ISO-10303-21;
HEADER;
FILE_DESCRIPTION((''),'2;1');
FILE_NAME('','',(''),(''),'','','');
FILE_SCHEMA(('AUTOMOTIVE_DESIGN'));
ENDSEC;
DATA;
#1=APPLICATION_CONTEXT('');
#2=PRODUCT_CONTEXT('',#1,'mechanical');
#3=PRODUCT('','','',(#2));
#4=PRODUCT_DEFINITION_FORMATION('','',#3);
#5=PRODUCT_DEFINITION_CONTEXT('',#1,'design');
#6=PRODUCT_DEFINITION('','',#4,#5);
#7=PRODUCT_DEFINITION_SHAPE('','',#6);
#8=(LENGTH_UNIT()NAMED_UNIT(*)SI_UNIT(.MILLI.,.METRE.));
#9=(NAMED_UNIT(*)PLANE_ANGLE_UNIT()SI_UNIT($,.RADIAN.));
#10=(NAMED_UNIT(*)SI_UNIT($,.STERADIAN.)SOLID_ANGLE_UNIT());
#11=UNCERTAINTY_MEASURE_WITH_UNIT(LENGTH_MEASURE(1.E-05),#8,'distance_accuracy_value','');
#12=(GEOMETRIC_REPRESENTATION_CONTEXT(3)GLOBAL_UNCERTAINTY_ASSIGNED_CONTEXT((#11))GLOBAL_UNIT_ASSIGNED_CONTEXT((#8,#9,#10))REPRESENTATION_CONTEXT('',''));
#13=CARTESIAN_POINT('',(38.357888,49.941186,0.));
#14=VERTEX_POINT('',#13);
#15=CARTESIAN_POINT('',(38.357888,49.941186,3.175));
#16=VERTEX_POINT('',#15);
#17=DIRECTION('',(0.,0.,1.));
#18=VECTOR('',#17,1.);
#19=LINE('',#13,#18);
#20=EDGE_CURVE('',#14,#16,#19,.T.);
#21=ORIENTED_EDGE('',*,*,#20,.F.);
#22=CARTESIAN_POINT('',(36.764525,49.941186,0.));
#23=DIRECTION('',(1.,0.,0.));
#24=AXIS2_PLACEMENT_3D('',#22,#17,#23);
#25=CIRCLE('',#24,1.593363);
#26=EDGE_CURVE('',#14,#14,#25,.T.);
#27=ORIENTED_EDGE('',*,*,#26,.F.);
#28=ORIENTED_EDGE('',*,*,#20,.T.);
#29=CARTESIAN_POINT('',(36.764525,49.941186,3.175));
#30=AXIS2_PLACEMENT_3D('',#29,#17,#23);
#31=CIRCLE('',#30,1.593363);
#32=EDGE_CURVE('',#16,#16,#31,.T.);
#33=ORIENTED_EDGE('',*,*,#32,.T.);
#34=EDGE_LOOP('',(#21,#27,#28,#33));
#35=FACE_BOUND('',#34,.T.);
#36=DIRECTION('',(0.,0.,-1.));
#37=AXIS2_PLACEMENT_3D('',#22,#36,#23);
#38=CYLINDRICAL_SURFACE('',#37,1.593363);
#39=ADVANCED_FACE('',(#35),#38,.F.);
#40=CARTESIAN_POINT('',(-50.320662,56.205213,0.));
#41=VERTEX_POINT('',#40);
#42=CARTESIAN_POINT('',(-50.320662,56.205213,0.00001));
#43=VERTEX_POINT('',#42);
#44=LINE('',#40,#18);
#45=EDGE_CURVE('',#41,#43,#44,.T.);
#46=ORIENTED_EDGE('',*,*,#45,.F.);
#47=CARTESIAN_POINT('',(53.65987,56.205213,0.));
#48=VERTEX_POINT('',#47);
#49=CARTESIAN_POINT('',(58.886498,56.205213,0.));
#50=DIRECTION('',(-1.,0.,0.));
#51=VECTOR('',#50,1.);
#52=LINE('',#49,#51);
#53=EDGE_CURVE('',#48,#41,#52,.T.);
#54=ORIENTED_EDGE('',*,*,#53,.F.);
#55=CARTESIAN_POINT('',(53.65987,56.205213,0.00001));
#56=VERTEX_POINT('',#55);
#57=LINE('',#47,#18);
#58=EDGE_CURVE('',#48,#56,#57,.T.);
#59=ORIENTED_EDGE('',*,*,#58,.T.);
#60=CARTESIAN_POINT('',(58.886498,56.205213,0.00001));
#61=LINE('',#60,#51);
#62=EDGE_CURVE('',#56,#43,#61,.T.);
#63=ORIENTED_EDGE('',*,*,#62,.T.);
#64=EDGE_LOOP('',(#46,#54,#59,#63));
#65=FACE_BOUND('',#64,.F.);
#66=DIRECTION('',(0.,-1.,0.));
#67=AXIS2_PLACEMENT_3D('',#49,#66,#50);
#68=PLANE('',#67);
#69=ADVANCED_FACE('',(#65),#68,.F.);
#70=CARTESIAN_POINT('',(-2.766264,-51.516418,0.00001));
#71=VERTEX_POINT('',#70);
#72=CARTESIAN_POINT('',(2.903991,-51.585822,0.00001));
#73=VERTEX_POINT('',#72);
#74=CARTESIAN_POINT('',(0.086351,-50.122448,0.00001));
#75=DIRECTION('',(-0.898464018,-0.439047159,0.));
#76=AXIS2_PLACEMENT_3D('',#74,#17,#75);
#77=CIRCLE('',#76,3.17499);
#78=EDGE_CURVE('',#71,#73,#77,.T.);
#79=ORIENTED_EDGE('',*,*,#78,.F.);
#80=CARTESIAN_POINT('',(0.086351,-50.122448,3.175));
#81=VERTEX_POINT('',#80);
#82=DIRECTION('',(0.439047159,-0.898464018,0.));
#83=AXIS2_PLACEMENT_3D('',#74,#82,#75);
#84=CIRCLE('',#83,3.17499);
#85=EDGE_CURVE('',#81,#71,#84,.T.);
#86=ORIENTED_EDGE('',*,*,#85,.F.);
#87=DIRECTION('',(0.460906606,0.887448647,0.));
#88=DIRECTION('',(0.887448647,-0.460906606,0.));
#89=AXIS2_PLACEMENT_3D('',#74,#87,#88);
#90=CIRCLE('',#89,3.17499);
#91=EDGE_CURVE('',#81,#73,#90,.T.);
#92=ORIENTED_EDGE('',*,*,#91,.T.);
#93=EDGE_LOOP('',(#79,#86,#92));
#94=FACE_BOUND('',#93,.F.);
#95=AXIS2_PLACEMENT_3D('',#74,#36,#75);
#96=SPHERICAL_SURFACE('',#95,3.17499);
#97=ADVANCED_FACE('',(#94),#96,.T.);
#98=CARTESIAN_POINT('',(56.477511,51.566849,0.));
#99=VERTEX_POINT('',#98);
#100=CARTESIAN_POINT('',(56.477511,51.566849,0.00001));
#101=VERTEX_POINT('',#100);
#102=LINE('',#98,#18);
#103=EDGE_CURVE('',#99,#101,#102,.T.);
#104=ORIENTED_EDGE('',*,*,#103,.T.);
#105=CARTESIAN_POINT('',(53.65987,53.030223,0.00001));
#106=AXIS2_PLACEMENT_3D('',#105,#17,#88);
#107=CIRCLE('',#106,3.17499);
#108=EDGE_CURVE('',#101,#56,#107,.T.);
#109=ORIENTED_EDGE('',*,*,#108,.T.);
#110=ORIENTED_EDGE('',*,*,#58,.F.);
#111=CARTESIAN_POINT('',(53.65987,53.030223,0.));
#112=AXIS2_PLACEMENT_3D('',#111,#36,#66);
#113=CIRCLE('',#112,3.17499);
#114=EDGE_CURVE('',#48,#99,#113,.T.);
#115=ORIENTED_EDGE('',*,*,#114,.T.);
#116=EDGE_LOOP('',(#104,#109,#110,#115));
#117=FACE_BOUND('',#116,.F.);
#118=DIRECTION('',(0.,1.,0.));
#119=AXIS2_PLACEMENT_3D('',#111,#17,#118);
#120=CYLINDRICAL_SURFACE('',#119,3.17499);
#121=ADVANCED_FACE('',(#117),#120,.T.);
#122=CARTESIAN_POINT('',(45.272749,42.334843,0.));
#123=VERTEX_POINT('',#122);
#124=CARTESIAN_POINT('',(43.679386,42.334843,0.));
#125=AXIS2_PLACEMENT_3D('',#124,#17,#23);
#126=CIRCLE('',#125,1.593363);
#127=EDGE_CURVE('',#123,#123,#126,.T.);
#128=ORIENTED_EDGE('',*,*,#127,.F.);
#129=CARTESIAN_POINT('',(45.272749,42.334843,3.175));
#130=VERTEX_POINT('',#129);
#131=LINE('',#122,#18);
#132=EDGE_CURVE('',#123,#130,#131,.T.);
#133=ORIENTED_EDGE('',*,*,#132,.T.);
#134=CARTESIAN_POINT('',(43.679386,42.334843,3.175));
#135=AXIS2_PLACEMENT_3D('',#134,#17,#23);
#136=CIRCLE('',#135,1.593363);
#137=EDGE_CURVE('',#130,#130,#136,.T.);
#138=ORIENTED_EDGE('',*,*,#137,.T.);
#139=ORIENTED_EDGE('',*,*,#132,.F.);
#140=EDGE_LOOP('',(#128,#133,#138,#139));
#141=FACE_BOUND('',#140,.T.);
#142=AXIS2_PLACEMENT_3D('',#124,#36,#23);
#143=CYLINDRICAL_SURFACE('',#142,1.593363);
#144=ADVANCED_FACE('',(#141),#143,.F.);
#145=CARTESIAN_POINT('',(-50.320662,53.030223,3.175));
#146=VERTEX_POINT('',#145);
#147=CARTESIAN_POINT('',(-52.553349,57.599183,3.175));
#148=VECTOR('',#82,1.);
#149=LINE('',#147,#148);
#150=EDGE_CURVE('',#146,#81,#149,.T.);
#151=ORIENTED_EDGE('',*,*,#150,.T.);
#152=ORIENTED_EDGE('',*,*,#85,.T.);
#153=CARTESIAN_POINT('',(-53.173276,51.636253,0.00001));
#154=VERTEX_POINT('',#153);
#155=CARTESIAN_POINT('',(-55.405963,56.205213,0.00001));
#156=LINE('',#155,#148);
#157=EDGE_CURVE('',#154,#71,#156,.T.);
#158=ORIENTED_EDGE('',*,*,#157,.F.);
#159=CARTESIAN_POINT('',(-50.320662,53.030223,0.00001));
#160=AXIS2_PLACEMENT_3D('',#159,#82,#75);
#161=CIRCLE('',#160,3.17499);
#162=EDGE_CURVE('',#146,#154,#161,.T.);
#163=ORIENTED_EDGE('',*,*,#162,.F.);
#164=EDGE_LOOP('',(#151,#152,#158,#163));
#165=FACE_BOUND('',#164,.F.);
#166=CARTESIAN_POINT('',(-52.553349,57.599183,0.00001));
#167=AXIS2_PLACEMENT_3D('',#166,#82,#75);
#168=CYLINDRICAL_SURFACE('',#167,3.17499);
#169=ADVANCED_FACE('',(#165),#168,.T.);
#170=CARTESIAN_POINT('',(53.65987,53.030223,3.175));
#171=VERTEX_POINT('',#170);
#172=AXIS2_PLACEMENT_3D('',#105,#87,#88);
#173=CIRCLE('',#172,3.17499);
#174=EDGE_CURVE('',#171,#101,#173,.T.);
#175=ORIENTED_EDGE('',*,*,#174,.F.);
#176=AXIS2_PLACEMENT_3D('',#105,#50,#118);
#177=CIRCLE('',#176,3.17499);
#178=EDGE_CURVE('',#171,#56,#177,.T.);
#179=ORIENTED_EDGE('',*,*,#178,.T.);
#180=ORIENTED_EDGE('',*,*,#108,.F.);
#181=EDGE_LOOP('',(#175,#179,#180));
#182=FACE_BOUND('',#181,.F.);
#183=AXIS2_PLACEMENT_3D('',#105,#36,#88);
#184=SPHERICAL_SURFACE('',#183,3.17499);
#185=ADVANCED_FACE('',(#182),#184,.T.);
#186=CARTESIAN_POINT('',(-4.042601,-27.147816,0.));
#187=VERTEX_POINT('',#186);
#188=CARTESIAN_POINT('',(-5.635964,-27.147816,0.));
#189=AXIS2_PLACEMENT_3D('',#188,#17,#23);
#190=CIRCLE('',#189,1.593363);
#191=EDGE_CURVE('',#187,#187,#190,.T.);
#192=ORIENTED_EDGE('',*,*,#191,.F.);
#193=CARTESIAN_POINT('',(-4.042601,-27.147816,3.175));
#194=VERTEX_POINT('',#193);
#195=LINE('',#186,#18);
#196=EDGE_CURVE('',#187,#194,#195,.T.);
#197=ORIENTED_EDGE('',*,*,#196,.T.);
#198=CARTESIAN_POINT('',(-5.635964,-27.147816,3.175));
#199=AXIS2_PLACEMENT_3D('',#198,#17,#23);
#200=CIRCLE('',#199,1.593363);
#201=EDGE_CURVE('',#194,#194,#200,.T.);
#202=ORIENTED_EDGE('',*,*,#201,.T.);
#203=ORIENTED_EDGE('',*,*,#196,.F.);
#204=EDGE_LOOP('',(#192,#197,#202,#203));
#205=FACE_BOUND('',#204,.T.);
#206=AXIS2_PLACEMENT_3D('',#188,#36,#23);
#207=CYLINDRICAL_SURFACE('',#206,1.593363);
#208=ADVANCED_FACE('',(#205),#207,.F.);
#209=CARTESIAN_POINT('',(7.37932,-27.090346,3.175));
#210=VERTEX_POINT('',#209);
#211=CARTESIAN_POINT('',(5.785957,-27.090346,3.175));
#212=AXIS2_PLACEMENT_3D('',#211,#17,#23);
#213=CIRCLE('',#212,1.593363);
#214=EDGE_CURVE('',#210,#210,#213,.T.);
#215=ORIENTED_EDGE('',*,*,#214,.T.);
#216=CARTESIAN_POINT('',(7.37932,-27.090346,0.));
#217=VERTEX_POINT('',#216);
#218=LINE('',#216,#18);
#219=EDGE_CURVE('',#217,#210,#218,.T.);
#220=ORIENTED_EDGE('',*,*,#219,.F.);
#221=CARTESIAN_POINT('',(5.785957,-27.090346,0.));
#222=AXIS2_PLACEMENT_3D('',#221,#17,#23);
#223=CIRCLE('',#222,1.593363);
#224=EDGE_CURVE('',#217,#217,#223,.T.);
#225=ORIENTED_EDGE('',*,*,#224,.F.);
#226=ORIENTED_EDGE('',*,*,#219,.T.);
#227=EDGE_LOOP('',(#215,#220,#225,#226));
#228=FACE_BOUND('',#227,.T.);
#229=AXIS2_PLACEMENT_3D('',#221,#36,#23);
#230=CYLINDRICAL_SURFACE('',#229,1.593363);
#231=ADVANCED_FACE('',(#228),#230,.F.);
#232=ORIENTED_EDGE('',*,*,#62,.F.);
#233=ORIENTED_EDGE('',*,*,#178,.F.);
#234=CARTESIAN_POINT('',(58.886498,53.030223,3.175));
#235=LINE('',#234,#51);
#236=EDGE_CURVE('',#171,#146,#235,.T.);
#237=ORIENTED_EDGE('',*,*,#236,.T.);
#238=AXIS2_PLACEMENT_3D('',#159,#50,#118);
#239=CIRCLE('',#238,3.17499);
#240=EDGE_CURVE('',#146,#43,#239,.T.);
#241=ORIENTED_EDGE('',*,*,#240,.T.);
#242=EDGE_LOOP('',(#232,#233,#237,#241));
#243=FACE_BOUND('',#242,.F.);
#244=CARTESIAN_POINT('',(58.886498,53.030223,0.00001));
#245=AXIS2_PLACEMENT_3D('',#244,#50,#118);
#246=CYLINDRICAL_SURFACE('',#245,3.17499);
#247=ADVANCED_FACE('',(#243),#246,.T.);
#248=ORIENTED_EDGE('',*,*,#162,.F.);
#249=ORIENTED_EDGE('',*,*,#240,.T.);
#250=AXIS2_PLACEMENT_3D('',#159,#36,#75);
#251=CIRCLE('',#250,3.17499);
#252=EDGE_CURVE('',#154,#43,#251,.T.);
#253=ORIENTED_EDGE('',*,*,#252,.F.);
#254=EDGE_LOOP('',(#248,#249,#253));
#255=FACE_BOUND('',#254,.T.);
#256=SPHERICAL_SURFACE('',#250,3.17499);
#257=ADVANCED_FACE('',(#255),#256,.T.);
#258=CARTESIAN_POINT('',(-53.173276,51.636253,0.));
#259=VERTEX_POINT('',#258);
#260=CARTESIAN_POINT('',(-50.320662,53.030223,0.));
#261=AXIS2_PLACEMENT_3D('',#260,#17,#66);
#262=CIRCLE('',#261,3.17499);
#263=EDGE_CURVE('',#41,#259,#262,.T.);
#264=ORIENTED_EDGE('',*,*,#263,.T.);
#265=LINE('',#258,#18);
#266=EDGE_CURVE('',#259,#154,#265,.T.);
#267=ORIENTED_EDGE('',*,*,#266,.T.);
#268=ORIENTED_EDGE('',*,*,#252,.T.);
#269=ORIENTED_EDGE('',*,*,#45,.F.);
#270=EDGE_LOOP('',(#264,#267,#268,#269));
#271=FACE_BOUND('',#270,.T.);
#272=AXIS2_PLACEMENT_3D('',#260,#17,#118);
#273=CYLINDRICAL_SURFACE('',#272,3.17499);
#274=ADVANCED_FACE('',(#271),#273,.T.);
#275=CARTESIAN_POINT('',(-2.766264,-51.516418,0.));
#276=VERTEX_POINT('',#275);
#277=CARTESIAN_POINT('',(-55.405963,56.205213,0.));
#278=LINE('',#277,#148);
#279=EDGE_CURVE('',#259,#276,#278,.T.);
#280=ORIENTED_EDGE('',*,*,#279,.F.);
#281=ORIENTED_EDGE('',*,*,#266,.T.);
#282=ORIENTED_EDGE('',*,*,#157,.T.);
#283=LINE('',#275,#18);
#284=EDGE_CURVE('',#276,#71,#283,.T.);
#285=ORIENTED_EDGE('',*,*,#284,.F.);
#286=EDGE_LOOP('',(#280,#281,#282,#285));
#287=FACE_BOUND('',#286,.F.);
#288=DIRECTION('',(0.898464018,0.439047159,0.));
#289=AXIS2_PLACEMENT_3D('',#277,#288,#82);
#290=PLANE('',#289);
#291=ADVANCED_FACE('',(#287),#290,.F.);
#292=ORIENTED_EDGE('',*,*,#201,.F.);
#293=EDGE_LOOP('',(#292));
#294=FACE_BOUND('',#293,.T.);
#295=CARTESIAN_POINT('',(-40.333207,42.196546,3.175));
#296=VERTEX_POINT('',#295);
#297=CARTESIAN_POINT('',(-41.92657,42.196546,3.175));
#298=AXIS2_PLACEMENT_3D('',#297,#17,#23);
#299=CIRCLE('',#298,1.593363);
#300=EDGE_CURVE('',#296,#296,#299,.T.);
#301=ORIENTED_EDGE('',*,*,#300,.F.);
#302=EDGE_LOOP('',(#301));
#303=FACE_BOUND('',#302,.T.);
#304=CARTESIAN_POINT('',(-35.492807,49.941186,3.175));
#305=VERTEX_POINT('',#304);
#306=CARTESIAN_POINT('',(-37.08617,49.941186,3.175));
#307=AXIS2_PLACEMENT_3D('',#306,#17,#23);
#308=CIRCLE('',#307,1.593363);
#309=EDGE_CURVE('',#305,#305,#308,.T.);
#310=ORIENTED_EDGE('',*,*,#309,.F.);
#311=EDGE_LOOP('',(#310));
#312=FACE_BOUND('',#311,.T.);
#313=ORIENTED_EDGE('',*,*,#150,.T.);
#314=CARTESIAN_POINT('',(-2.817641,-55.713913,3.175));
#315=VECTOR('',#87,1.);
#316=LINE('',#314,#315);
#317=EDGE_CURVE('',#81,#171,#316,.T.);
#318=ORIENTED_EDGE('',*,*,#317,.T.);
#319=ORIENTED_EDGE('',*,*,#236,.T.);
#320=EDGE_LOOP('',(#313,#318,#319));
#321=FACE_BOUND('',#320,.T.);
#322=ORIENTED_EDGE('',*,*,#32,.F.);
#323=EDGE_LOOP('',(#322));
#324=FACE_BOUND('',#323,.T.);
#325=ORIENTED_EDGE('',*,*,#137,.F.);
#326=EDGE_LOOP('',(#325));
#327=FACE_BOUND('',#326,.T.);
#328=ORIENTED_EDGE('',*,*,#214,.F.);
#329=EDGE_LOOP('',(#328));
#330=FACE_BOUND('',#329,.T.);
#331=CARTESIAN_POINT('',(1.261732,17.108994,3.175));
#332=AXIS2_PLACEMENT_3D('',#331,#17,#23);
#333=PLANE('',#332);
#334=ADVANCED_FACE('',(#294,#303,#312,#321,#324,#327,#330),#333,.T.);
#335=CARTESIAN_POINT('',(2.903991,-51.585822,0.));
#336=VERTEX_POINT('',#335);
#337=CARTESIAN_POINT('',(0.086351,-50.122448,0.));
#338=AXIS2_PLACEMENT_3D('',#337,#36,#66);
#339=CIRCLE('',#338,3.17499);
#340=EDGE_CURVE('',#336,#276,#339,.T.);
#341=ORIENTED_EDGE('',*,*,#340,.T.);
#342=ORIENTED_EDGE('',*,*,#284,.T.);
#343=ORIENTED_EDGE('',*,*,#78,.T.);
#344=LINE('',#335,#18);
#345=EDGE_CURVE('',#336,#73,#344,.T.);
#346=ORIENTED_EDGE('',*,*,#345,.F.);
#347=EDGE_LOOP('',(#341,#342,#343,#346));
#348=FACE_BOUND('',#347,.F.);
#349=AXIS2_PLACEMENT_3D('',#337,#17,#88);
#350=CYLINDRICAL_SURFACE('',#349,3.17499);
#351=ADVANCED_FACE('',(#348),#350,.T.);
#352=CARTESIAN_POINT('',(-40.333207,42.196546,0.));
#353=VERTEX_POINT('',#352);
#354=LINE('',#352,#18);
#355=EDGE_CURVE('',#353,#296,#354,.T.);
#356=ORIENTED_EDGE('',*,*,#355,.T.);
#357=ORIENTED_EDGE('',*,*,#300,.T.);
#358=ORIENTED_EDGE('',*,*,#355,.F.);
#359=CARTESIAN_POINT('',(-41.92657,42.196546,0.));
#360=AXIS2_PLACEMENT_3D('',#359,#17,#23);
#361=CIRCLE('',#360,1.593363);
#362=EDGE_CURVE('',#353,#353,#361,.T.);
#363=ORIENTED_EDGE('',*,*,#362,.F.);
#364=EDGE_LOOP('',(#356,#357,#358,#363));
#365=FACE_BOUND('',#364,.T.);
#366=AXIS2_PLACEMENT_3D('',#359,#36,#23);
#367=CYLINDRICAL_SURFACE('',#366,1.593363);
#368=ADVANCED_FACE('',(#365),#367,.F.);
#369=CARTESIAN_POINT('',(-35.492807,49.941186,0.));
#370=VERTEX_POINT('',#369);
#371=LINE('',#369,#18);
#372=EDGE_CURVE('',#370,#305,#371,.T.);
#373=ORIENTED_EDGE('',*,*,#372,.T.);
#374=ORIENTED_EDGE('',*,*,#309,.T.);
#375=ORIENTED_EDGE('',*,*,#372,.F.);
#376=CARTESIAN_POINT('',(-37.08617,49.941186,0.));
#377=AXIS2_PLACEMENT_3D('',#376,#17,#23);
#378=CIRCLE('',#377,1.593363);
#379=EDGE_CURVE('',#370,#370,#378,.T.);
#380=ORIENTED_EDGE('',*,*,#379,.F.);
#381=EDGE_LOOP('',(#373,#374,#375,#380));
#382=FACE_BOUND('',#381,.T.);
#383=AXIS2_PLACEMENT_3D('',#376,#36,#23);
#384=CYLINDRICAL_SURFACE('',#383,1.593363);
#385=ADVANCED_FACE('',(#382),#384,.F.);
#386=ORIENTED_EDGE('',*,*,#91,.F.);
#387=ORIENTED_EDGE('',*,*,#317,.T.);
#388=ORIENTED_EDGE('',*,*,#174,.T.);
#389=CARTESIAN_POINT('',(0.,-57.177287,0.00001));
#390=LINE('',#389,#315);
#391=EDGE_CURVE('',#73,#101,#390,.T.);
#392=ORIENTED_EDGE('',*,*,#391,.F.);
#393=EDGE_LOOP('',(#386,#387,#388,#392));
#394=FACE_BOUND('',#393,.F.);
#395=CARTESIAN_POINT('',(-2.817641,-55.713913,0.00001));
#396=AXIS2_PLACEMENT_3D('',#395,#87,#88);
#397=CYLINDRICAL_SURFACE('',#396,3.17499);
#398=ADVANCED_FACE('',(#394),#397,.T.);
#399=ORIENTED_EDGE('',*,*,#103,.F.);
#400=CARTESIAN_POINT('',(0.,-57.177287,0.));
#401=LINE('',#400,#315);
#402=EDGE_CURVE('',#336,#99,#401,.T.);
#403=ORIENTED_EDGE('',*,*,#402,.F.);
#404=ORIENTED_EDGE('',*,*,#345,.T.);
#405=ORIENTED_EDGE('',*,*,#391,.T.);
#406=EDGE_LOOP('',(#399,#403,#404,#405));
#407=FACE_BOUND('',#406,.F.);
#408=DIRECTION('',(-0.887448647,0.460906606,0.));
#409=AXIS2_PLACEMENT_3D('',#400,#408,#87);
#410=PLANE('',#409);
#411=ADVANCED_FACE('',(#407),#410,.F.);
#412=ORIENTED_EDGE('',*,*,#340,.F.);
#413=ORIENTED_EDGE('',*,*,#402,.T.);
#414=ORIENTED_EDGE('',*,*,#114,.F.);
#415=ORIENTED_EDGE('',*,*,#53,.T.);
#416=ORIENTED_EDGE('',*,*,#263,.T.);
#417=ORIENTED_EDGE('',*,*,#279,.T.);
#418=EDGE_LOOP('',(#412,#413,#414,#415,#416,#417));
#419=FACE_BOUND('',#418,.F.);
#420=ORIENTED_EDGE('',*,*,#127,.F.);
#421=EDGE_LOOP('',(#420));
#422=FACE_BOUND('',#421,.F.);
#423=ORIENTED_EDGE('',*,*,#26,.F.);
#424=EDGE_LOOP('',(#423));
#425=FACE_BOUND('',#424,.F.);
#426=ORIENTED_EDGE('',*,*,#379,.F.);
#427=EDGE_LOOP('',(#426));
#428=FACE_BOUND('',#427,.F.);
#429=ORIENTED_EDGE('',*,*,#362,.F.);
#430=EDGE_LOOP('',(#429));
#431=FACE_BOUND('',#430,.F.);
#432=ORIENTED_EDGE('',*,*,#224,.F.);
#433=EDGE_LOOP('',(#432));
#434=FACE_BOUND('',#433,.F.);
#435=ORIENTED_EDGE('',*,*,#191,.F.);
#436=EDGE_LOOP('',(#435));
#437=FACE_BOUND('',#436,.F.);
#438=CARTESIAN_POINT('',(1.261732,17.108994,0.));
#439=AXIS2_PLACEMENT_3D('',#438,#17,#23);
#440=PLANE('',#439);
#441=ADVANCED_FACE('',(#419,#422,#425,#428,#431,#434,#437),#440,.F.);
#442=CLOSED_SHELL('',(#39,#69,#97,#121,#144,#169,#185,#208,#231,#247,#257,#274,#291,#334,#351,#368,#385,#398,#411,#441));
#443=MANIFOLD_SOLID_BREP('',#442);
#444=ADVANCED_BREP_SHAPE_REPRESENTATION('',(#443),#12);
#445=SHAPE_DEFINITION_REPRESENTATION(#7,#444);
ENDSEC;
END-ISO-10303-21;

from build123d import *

# Parameters (mm, degrees)
F0_R     = 1.5933630383
F1_DEPTH = 3.175
F2_R     = 3.17499


# Not quite as in the source:
# - a fillet or chamfer is up to 0.001 mm smaller than in the source, because OpenCascade refuses the exact size


with BuildPart() as f1:
    # F0 (on Top) → F1 (new body)
    with BuildSketch(Plane.XY):
        Polygon((58.8864982128, 56.2052130699), (-55.4059632123, 56.2052130699), (0, -57.1772865951), align=None)
        with Locations((-5.6359637529, -27.1478164941)):
            Circle(F0_R, mode=Mode.SUBTRACT)
        with Locations((5.7859569788, -27.0903464407)):
            Circle(F0_R, mode=Mode.SUBTRACT)
        with Locations((-41.9265702367, 42.1965457499)):
            Circle(F0_R, mode=Mode.SUBTRACT)
        with Locations((-37.0861701667, 49.9411858618)):
            Circle(F0_R, mode=Mode.SUBTRACT)
        with Locations((43.6793863773, 42.3348434269)):
            Circle(F0_R, mode=Mode.SUBTRACT)
        with Locations((36.7645248771, 49.9411858618)):
            Circle(F0_R, mode=Mode.SUBTRACT)
    extrude(amount=F1_DEPTH)

    # F2 (radius 3.175 in the source; OpenCascade refuses exactly that, so slightly less here)
    f2_edges = [f1.edges().sort_by_distance(p)[0] for p in [
        (-27.702982, -0.486037, 3.175),
        (29.443249, -0.486037, 3.175),
        (1.740268, 56.205213, 3.175),
        (0, -57.177287, 1.5875),
        (-55.405963, 56.205213, 1.5875),
        (58.886498, 56.205213, 1.5875),
    ]]
    fillet(f2_edges, radius=F2_R)


solid = f1.part
